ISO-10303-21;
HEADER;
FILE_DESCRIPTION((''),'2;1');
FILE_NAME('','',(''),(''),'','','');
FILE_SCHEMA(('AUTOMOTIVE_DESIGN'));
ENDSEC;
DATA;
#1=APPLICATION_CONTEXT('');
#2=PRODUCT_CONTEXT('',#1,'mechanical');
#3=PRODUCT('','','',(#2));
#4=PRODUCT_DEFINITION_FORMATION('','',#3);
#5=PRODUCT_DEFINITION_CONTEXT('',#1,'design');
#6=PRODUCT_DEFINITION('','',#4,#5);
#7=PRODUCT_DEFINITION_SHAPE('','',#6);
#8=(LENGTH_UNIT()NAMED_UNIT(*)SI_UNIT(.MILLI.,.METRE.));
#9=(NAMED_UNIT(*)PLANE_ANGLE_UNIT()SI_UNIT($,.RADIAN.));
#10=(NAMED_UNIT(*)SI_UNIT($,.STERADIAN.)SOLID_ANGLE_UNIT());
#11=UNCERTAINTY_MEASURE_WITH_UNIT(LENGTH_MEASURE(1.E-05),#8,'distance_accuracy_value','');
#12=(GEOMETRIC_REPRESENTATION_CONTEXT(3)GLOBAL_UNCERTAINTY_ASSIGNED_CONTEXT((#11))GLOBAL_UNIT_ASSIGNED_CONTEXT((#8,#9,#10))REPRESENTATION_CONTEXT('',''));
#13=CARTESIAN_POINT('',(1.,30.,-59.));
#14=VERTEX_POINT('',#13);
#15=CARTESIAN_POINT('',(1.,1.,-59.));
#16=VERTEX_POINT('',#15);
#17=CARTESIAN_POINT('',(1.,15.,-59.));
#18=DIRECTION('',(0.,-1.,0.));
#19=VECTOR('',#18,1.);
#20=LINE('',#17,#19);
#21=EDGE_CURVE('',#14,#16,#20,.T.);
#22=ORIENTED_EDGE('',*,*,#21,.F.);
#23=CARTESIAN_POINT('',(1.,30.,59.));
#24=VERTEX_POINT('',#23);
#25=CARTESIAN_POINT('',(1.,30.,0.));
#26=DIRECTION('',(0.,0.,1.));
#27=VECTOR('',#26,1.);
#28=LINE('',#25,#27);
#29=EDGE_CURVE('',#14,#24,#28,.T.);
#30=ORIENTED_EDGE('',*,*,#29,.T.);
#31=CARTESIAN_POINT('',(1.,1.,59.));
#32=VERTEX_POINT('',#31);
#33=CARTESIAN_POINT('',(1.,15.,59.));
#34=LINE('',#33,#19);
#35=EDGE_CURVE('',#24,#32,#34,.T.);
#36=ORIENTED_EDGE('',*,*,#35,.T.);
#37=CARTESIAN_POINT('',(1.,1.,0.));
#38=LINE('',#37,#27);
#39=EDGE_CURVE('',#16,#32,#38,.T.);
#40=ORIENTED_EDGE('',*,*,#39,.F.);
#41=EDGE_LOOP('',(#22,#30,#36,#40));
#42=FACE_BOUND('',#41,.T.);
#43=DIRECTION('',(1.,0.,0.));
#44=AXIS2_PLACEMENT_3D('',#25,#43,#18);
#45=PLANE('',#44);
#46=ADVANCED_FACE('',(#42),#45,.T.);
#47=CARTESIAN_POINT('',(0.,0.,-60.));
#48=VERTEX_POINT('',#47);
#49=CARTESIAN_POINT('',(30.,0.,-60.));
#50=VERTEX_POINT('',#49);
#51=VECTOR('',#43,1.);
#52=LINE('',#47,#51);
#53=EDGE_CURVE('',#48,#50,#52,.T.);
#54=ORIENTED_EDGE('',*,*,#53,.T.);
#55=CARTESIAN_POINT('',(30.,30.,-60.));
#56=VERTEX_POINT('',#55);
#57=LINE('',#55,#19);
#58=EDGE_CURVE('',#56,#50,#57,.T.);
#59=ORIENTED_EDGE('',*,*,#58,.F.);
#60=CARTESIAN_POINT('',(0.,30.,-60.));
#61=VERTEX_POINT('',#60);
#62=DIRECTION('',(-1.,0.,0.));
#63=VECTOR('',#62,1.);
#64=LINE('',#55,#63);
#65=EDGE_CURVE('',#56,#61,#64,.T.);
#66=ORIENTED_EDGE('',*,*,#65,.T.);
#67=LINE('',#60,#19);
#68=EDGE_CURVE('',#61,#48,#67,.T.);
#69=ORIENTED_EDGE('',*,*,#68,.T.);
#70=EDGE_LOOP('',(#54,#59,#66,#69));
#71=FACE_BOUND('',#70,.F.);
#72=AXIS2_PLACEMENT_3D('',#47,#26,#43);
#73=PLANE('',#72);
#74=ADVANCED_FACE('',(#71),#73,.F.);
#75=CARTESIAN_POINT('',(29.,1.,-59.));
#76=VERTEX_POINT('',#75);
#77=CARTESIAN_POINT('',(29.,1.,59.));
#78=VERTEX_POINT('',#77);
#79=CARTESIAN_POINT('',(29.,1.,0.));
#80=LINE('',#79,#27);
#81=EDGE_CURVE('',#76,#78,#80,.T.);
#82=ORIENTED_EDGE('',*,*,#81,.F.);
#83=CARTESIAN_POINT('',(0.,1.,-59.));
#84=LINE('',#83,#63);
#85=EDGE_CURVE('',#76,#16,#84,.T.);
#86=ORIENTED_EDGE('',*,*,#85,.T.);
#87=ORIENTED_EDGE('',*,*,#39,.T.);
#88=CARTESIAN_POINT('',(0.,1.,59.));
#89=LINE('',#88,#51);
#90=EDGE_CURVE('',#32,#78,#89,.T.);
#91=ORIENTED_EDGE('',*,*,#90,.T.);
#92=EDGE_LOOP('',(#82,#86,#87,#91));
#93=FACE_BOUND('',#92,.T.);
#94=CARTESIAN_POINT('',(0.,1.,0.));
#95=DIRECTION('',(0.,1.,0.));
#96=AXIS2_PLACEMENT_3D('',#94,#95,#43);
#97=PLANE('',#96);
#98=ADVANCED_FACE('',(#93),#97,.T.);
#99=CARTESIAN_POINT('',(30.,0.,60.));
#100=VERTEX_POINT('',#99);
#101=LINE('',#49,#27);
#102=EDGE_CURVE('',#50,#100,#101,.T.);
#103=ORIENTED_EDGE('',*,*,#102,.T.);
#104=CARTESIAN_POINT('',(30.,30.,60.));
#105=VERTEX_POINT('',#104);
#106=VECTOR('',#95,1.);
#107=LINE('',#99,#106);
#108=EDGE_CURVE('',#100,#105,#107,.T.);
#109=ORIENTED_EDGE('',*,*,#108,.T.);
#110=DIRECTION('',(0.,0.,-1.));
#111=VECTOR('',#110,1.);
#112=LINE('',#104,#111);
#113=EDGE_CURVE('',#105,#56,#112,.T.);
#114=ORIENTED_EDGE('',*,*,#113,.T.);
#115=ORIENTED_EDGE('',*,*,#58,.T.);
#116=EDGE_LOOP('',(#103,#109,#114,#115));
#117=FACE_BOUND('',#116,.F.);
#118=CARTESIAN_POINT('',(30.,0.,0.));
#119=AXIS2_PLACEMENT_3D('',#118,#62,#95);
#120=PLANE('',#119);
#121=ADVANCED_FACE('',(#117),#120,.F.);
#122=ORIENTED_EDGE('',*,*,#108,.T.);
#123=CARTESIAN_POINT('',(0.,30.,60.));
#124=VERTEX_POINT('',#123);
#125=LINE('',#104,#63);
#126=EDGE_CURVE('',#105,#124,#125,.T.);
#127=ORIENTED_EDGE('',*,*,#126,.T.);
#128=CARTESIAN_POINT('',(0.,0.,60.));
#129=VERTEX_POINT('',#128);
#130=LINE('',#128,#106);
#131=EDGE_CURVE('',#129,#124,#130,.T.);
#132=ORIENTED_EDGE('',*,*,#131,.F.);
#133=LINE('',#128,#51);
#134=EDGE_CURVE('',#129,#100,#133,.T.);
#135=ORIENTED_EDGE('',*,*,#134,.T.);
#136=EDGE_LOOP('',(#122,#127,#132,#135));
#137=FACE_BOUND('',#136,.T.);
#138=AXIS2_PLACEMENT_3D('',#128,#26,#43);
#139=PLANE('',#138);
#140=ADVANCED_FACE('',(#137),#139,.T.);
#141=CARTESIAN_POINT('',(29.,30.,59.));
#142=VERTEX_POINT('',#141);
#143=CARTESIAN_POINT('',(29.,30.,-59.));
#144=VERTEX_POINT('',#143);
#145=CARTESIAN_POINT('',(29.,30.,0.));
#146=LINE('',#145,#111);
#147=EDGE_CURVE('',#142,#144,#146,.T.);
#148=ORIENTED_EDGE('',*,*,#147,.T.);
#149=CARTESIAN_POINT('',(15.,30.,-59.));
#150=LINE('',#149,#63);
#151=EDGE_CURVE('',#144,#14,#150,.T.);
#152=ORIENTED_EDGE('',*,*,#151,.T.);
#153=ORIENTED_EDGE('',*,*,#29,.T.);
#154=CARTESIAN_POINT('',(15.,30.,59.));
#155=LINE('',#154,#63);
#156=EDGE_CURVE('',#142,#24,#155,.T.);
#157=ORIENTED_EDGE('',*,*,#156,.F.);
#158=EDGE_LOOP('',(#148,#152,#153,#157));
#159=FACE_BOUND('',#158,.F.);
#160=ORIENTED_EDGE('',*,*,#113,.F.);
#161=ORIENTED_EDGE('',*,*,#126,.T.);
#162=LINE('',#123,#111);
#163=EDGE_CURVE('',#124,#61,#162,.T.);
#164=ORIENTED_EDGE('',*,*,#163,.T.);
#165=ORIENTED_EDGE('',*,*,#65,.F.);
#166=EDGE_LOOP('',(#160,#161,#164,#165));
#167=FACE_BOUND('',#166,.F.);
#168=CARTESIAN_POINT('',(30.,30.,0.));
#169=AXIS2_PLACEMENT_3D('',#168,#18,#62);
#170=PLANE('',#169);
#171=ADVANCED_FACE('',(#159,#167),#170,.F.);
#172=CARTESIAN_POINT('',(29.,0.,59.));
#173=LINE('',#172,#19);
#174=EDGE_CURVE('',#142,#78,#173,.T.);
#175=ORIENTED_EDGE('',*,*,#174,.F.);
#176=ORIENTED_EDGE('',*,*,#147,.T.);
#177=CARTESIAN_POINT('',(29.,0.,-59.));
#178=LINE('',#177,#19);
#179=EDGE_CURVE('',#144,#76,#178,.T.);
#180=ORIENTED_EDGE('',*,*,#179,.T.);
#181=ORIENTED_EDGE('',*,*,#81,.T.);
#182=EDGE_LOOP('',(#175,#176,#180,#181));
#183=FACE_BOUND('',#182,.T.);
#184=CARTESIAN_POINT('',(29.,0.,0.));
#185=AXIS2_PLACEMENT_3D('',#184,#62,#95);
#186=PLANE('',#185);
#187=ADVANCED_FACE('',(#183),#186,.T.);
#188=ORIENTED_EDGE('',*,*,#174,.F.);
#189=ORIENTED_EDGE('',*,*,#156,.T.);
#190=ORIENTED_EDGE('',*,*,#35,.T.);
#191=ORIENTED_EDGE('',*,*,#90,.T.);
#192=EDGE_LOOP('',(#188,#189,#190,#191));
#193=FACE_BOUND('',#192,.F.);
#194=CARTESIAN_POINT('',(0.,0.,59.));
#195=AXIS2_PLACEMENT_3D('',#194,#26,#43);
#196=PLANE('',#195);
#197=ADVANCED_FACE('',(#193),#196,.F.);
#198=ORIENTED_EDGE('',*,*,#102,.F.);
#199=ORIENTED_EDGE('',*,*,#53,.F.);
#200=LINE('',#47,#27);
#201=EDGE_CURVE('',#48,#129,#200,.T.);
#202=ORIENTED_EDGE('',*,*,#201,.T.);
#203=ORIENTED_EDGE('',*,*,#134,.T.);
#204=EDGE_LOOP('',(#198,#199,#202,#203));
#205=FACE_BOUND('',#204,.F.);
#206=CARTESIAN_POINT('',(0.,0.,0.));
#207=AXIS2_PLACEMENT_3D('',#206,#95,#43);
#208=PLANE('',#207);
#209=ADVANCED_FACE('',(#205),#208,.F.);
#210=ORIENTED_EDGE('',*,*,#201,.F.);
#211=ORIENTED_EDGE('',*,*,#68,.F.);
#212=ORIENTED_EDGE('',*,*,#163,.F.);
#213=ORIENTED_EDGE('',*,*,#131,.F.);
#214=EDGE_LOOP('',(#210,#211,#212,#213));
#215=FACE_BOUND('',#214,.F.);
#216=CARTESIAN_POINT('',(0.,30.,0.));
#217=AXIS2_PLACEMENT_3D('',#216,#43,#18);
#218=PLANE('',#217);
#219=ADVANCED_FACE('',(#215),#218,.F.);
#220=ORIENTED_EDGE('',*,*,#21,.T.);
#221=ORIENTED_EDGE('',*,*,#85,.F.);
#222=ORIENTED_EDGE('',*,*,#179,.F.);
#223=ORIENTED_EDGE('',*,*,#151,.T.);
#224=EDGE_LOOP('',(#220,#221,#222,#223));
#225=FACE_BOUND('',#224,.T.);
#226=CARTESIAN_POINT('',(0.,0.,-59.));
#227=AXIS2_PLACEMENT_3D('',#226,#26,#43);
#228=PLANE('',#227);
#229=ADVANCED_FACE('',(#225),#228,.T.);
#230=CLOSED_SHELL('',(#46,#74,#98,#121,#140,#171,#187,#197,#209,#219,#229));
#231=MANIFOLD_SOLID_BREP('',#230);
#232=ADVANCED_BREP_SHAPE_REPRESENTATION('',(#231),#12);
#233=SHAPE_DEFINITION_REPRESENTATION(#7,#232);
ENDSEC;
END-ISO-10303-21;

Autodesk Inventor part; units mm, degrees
ref_plane "YZ Plane" through (0, 0, 0) normal (1, 0, 0) x (0, 1, 0)
ref_plane "XY Plane" through (0, 0, 0) normal (0, 0, 1) x (1, 0, 0)
sketch "Sketch1" plane through (0, 0, 0) normal (0, 0, 1) x (1, 0, 0)
  line L0 (0, 0) -> (30, 0)
  line L1 (30, 0) -> (30, 30)
  line L2 (30, 30) -> (0, 30)
  line L3 (0, 30) -> (0, 0)
  dimension "d0" = 30
  dimension "d1" = 30
extrude "Extrusion1" add sketch "Sketch1" along normal mid plane 120
ref_plane "Work Plane1" through (0, 15, 0) normal (0, 1, 0) x (-1, 0, 0)
split body "Split1" result two bodies by plane through (0, 15, 0) normal (0, 1, 0) first body at (20, 15.5, -20)
combine bodies "Combine1" operation type add bodies to combine 3 2
shell "Shell1" thickness 1 removed faces 1 at (10, 30, 20) bodies 2
properties part number "excersise 3"
